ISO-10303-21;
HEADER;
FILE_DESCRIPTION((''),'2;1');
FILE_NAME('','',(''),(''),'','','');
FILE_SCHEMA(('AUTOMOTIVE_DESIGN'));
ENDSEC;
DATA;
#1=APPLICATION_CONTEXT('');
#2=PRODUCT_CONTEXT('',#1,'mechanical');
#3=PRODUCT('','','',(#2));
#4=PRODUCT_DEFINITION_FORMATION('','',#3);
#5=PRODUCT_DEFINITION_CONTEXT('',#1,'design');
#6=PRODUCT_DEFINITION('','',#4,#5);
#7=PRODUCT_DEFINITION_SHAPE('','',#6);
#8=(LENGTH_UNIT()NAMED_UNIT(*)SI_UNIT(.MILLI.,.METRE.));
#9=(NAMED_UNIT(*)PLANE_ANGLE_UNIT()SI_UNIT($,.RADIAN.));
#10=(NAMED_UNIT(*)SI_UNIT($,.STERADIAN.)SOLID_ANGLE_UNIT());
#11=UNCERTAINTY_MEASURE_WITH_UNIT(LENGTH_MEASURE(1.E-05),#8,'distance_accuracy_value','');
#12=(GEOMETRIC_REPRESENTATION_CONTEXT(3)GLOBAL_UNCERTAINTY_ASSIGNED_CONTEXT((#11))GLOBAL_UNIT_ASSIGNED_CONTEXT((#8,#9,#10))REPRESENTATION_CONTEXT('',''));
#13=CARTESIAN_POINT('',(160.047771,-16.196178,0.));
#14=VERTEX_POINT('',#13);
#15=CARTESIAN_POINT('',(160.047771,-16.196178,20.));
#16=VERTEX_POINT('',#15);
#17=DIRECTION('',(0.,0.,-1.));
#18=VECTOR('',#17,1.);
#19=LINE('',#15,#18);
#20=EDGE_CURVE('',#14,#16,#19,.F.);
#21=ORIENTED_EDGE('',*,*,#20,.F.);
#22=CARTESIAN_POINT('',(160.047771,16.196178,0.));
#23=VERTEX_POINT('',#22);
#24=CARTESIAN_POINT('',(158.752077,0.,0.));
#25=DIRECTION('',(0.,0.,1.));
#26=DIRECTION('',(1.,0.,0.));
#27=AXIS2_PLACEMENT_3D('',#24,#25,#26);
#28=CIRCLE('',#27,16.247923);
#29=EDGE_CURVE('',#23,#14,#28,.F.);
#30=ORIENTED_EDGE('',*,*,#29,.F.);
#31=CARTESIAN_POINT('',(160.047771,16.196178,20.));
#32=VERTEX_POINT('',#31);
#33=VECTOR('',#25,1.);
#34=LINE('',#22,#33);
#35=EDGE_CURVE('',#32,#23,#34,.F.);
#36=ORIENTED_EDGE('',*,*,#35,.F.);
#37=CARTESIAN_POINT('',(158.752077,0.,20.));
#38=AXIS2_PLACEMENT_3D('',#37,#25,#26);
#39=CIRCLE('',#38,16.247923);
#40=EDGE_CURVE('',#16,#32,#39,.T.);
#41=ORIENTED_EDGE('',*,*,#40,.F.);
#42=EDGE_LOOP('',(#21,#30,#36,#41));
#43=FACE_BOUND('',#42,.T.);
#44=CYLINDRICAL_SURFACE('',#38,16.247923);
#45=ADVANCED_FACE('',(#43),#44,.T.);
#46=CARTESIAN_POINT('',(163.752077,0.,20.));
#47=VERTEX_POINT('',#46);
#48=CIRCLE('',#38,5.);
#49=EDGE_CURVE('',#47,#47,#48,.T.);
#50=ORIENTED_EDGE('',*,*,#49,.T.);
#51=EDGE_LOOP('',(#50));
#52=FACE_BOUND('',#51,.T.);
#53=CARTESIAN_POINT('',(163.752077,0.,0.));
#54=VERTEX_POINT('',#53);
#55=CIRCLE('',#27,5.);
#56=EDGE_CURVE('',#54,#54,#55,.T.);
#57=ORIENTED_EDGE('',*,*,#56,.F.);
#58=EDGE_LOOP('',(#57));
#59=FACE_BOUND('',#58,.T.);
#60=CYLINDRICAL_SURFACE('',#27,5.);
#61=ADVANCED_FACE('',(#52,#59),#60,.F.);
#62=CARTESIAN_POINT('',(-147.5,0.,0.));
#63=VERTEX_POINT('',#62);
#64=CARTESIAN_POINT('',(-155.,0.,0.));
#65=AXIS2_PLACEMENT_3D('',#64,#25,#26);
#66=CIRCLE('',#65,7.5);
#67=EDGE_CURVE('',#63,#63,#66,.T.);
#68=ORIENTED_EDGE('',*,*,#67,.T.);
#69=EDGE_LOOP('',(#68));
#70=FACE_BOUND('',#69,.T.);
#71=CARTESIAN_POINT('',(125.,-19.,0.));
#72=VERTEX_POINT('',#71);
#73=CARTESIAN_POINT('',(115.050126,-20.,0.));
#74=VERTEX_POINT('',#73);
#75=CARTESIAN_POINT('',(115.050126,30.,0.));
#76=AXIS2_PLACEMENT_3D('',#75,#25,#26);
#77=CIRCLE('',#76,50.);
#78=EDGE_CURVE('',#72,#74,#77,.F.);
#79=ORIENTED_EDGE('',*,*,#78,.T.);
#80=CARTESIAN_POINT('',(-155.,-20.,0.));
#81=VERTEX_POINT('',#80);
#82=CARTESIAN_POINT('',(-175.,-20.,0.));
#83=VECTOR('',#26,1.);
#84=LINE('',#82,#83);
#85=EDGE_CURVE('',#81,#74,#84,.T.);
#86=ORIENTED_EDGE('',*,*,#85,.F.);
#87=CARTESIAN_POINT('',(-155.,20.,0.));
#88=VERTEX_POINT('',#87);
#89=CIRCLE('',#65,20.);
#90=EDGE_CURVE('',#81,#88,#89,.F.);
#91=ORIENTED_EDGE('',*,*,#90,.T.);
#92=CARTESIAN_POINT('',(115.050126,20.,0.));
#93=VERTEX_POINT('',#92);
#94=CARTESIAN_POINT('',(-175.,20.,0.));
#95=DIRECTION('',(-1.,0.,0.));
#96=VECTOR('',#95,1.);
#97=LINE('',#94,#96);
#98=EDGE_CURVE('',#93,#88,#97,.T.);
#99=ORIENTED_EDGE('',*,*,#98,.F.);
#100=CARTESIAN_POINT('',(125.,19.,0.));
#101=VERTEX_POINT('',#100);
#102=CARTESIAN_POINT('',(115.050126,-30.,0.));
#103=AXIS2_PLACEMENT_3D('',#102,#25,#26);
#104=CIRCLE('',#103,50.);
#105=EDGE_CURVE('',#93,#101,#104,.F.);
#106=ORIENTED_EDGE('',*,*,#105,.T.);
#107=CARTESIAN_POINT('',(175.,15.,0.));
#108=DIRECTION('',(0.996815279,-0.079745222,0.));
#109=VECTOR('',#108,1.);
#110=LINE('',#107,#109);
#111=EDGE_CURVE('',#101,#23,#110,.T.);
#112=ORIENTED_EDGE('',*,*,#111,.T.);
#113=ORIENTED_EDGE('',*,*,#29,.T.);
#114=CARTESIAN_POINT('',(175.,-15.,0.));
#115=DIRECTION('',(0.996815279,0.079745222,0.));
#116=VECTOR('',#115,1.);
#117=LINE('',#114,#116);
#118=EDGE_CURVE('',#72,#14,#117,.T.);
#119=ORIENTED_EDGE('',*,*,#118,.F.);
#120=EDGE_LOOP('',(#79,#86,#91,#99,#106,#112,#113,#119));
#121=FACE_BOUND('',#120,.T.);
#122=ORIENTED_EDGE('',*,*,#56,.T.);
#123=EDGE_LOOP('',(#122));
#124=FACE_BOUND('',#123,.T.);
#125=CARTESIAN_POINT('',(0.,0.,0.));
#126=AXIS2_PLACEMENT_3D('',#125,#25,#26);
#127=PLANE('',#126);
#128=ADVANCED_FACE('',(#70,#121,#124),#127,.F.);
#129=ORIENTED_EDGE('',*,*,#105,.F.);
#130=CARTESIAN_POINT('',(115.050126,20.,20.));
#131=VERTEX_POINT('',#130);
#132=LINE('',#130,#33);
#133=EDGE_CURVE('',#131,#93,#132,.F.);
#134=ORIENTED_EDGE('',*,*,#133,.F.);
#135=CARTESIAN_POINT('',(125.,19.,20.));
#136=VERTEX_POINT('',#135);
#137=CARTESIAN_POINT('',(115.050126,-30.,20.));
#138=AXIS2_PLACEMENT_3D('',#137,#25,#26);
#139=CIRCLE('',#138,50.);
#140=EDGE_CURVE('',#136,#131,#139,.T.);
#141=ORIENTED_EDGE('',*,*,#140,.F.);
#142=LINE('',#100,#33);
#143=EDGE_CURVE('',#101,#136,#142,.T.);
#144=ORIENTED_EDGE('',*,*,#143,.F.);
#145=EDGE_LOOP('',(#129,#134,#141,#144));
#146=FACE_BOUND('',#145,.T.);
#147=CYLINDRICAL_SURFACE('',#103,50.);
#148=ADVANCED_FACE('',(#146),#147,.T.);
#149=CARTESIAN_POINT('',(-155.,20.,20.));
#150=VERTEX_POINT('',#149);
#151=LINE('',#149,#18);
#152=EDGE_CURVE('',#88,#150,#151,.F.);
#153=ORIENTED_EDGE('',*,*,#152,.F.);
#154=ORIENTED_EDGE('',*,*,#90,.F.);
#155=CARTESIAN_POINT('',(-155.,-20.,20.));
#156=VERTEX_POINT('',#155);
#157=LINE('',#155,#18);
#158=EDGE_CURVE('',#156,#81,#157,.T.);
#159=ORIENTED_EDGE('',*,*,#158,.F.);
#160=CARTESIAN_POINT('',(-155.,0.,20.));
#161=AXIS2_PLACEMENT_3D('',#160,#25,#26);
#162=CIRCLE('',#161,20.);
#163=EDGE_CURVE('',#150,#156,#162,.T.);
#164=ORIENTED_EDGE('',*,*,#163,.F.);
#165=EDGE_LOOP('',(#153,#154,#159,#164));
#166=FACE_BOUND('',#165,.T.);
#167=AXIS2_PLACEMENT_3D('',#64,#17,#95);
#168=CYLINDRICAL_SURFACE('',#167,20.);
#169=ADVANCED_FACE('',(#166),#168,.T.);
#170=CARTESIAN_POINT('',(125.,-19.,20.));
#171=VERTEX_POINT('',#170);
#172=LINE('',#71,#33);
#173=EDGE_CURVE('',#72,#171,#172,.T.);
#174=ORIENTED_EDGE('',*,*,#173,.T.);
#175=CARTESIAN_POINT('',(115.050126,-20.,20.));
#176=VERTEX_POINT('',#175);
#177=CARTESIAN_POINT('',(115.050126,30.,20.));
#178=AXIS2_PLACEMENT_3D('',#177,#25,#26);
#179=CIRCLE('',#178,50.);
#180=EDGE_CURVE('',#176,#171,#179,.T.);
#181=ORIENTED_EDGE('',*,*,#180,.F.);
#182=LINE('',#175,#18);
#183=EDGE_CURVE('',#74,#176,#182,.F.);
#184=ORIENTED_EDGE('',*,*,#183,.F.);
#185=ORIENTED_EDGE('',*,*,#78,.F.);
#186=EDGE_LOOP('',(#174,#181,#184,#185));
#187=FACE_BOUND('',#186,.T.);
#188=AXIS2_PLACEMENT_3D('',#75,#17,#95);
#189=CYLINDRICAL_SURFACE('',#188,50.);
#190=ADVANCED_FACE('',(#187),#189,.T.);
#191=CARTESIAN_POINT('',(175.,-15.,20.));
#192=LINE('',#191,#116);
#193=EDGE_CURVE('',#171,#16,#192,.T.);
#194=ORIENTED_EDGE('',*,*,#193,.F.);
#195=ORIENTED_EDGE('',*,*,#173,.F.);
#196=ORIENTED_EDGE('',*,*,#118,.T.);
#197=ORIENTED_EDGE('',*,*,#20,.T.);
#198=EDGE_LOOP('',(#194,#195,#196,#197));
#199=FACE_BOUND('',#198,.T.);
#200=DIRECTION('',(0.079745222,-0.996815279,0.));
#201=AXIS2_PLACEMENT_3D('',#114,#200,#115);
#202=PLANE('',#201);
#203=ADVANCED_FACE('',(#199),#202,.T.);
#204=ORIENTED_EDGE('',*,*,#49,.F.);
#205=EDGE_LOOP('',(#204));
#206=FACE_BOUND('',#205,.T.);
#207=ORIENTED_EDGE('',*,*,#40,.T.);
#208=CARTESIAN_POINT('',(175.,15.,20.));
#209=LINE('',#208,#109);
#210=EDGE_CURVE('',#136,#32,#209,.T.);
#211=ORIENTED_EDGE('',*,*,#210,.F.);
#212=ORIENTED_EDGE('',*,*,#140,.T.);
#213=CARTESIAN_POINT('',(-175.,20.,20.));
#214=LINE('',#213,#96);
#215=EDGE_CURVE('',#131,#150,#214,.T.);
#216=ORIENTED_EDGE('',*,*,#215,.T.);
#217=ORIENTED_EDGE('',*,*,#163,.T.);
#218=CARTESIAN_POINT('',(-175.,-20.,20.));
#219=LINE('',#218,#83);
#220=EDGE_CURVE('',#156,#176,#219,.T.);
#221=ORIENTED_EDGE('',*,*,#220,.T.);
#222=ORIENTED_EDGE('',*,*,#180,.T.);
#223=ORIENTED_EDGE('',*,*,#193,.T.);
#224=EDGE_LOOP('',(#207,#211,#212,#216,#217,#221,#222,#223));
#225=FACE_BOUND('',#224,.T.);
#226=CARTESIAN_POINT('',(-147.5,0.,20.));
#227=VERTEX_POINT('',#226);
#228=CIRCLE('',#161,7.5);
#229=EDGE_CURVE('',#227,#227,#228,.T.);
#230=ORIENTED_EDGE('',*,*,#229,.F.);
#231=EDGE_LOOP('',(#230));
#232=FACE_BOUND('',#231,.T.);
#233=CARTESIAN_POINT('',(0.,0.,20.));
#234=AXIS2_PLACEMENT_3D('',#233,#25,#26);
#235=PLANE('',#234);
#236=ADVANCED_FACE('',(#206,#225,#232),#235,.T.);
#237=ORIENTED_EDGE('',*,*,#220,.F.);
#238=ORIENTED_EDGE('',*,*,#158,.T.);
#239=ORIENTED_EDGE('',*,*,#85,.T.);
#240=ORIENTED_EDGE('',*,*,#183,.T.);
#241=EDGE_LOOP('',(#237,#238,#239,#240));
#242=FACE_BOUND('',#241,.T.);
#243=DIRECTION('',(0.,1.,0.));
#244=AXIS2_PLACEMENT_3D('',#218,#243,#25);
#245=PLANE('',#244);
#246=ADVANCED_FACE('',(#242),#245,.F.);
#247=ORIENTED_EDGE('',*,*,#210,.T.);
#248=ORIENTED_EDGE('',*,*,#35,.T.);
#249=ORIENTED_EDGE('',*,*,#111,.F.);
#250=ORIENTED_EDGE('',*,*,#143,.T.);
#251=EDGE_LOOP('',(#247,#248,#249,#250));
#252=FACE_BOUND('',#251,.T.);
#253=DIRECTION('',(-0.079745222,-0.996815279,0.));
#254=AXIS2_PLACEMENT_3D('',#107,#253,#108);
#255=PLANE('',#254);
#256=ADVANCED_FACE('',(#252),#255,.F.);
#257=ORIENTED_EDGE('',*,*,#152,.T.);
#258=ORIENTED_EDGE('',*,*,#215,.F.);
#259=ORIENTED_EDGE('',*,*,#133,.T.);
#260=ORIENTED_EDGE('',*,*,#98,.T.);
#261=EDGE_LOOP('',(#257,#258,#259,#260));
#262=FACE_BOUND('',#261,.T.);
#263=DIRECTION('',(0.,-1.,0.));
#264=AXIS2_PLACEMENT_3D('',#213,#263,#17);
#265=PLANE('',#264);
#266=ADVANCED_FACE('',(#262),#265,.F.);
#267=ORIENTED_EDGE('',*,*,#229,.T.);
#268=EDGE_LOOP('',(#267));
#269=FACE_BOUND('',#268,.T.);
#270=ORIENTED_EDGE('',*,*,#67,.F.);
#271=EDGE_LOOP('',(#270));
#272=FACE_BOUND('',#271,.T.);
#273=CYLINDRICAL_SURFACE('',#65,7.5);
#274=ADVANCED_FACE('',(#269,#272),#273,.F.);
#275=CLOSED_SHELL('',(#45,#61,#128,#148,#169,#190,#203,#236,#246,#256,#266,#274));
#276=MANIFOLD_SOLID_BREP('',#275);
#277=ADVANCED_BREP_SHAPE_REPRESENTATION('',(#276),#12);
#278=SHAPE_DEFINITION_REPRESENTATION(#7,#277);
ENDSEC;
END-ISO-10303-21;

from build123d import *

# Parameters (mm, degrees)
SKETCH1_W           = 350
SKETCH1_H           = 40
BOSS_EXTRUDE1_DEPTH = 20
CUT_EXTRUDE1_DEPTH  = 178.270979012
FILLET1_R           = 50
FILLET2_R           = 50
FILLET3_R           = 16.247923
FILLET4_RADIUS      = 20
FILLET4_LENGTH      = 20
SKETCH3_R           = 7.5
SKETCH3_R_2         = 5
CUT_EXTRUDE2_DEPTH  = 178.270979012


with BuildPart() as part:
    # Sketch1 → Boss-Extrude1 (new body)
    with BuildSketch(Plane.XY):
        Rectangle(SKETCH1_W, SKETCH1_H)
    extrude(amount=BOSS_EXTRUDE1_DEPTH)

    # Sketch2 → Cut-Extrude1 (cut, through all)
    with BuildSketch(Plane.XY.offset(20)):
        Polygon((175, 20), (175, 15), (125, 19), (125, 20), align=None)
    cut_extrude1 = extrude(amount=-CUT_EXTRUDE1_DEPTH, mode=Mode.SUBTRACT)

    # Fillet1
    # the kernel refuses this fillet: 50 mm, written as the material it takes off along each edge
    with BuildSketch(Plane(origin=(125, 20, 44.874685928), x_dir=(-1, 0, 0), z_dir=(0, 0, -1))) as fillet1_piece_1:
        with BuildLine():
            CenterArc((9.949874371, -50), FILLET1_R, 90, 11.478340955)
            Line((0, -1), (-0.198997487, -0.02))
            ThreePointArc((-0.198997487, -0.02), (-1, -0.5), (-1, 0))
            Line((-1, 0), (0, 1))
            Line((0, 1), (9.949874371, 1))
            Line((9.949874371, 1), (9.949874371, 0))
        make_face()
    extrude(amount=69.749371855, mode=Mode.SUBTRACT)

    # Mirror3: Cut-Extrude1 across plane
    add(cut_extrude1.mirror(Plane.ZX), mode=Mode.SUBTRACT)

    # Fillet2
    # the kernel refuses this fillet: 50 mm, written as the material it takes off along each edge
    with BuildSketch(Plane(origin=(125, -20, 44.874685928), x_dir=(0, 1, 0), z_dir=(0, 0, -1))) as fillet2_piece_1:
        with BuildLine():
            CenterArc((50, -9.949874371), FILLET2_R, 168.521659045, 11.478340955)
            Line((0, -9.949874371), (-1, -9.949874371))
            Line((-1, -9.949874371), (-1, 0))
            Line((-1, 0), (0, 1))
            ThreePointArc((0, 1), (0.5, 1), (0.02, 0.198997487))
            Line((0.02, 0.198997487), (1, 0))
        make_face()
    extrude(amount=69.749371855, mode=Mode.SUBTRACT)

    # Fillet3
    fillet3_edges = [part.edges().sort_by_distance(p)[0] for p in [
        (175, 15, 10),
        (175, -15, 10),
    ]]
    fillet(fillet3_edges, radius=FILLET3_R)

    # Fillet4: full round fillet: the end face becomes a half cylinder, R = half its width
    fillet4_face = Plane((-175, 0, 10), x_dir=(0, 0, 1), z_dir=(-1, 0, 0))  # on the end face: x along it, z out of the body
    fillet4_slab = fillet4_face.offset(-FILLET4_RADIUS / 2) * Box(FILLET4_LENGTH, 2 * FILLET4_RADIUS, FILLET4_RADIUS, mode=Mode.PRIVATE)  # the body's end, R deep
    fillet4_round = Plane((-155, 0, 10), x_dir=(-1, 0, 0), z_dir=(0, 0, 1)) * Cylinder(FILLET4_RADIUS, FILLET4_LENGTH, mode=Mode.PRIVATE)  # its axis R under the face
    add(fillet4_slab - fillet4_round, mode=Mode.SUBTRACT)

    # Sketch3 → Cut-Extrude2 (cut, through all)
    with BuildSketch(Plane.XY.offset(20)):
        with Locations((-155, 0)):
            Circle(SKETCH3_R)
        with Locations((158.752076555, 0)):
            Circle(SKETCH3_R_2)
    extrude(amount=-CUT_EXTRUDE2_DEPTH, mode=Mode.SUBTRACT)


solid = part.part
